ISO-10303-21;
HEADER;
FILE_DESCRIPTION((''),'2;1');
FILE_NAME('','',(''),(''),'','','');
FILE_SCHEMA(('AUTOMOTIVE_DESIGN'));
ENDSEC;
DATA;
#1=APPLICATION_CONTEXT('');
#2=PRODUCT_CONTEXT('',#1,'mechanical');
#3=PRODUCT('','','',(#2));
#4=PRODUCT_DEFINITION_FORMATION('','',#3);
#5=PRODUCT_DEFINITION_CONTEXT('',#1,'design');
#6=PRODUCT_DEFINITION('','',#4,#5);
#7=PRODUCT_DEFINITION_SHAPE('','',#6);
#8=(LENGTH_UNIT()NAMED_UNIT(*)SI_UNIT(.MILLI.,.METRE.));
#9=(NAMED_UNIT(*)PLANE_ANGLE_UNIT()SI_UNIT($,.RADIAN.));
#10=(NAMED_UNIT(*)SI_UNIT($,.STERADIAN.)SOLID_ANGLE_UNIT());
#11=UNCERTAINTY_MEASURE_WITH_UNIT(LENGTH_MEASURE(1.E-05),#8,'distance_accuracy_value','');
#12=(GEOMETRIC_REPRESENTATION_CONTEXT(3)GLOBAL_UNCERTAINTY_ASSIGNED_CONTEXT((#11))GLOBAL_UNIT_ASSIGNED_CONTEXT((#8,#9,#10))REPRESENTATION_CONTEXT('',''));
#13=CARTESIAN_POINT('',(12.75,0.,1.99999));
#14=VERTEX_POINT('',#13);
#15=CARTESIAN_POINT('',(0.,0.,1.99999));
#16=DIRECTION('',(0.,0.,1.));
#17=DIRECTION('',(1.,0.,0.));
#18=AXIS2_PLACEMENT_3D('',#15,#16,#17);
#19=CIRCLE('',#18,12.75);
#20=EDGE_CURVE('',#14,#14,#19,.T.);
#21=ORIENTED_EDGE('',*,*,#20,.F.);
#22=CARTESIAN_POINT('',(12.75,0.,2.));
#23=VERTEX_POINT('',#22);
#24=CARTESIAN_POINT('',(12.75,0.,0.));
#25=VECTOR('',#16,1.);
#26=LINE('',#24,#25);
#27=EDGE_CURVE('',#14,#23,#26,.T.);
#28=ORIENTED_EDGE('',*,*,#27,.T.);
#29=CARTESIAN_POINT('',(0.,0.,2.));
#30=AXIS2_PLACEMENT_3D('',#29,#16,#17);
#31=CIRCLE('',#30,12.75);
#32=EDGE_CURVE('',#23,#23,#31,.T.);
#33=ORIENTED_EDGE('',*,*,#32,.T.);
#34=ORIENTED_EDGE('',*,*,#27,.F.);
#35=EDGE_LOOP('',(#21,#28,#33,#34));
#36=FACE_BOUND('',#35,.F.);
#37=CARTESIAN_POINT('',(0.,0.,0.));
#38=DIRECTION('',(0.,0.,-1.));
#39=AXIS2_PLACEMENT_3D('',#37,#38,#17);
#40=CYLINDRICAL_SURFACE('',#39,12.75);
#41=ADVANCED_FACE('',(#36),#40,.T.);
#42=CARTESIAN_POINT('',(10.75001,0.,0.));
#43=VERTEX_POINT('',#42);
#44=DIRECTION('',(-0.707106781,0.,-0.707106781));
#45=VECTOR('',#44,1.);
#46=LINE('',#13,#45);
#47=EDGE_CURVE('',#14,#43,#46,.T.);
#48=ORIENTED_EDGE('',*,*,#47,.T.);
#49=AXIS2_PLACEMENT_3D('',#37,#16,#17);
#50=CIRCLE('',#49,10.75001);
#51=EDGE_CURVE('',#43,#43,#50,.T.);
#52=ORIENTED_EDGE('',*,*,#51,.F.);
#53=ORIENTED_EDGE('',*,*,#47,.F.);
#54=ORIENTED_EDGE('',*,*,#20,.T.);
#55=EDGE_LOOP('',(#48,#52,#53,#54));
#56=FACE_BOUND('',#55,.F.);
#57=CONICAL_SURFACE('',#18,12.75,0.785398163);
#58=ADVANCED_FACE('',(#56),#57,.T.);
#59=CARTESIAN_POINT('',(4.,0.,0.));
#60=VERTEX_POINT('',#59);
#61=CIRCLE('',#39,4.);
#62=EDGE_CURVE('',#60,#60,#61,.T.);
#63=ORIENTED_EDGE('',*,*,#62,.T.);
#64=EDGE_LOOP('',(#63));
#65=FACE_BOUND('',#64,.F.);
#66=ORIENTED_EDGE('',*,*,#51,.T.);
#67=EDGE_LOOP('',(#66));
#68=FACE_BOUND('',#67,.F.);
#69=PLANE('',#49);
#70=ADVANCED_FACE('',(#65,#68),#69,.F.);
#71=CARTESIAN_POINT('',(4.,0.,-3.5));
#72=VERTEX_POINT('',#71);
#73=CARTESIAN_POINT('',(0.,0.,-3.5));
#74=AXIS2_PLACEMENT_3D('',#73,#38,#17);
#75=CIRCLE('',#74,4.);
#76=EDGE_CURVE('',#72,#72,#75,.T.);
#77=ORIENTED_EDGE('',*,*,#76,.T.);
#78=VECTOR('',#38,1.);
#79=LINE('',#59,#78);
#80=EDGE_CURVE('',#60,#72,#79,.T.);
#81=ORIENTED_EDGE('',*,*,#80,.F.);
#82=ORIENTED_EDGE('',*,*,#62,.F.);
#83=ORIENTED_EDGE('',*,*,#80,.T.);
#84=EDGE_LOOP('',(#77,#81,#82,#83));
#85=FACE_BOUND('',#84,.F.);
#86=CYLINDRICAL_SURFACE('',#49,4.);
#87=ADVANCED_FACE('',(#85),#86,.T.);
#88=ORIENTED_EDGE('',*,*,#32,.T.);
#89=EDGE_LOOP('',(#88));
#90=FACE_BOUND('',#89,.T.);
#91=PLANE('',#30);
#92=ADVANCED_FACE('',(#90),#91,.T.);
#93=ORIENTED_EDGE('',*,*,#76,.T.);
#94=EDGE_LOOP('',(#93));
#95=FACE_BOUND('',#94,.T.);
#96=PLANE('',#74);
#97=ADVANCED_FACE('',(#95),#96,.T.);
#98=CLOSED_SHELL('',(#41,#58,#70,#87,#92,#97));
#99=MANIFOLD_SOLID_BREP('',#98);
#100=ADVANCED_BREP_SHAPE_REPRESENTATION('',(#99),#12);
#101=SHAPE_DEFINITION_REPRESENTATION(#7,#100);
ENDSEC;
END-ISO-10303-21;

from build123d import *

# Parameters (mm, degrees)
F0_R     = 12.75
F1_DEPTH = 2
F2_SIZE  = 1.99999
F3_R     = 4
F4_DEPTH = 3.5


# Not quite as in the source:
# - a fillet or chamfer is up to 0.001 mm smaller than in the source, because OpenCascade refuses the exact size


with BuildPart() as f1:
    # F0 (on Top) → F1 (new body)
    with BuildSketch(Plane.XY):
        Circle(F0_R)
    extrude(amount=F1_DEPTH)

    # F2 (size 2 in the source; OpenCascade refuses exactly that, so slightly less here)
    f2_edges = [f1.edges().sort_by_distance(p)[0] for p in [
        (-12.75, 0, 0),
    ]]
    chamfer(f2_edges, length=F2_SIZE)

    # F3 (on face) → F4 (join)
    with BuildSketch(Plane(origin=(0, 0, 0), x_dir=(1, 0, 0), z_dir=(0, 0, -1))):
        Circle(F3_R)
    extrude(amount=F4_DEPTH)


solid = f1.part
